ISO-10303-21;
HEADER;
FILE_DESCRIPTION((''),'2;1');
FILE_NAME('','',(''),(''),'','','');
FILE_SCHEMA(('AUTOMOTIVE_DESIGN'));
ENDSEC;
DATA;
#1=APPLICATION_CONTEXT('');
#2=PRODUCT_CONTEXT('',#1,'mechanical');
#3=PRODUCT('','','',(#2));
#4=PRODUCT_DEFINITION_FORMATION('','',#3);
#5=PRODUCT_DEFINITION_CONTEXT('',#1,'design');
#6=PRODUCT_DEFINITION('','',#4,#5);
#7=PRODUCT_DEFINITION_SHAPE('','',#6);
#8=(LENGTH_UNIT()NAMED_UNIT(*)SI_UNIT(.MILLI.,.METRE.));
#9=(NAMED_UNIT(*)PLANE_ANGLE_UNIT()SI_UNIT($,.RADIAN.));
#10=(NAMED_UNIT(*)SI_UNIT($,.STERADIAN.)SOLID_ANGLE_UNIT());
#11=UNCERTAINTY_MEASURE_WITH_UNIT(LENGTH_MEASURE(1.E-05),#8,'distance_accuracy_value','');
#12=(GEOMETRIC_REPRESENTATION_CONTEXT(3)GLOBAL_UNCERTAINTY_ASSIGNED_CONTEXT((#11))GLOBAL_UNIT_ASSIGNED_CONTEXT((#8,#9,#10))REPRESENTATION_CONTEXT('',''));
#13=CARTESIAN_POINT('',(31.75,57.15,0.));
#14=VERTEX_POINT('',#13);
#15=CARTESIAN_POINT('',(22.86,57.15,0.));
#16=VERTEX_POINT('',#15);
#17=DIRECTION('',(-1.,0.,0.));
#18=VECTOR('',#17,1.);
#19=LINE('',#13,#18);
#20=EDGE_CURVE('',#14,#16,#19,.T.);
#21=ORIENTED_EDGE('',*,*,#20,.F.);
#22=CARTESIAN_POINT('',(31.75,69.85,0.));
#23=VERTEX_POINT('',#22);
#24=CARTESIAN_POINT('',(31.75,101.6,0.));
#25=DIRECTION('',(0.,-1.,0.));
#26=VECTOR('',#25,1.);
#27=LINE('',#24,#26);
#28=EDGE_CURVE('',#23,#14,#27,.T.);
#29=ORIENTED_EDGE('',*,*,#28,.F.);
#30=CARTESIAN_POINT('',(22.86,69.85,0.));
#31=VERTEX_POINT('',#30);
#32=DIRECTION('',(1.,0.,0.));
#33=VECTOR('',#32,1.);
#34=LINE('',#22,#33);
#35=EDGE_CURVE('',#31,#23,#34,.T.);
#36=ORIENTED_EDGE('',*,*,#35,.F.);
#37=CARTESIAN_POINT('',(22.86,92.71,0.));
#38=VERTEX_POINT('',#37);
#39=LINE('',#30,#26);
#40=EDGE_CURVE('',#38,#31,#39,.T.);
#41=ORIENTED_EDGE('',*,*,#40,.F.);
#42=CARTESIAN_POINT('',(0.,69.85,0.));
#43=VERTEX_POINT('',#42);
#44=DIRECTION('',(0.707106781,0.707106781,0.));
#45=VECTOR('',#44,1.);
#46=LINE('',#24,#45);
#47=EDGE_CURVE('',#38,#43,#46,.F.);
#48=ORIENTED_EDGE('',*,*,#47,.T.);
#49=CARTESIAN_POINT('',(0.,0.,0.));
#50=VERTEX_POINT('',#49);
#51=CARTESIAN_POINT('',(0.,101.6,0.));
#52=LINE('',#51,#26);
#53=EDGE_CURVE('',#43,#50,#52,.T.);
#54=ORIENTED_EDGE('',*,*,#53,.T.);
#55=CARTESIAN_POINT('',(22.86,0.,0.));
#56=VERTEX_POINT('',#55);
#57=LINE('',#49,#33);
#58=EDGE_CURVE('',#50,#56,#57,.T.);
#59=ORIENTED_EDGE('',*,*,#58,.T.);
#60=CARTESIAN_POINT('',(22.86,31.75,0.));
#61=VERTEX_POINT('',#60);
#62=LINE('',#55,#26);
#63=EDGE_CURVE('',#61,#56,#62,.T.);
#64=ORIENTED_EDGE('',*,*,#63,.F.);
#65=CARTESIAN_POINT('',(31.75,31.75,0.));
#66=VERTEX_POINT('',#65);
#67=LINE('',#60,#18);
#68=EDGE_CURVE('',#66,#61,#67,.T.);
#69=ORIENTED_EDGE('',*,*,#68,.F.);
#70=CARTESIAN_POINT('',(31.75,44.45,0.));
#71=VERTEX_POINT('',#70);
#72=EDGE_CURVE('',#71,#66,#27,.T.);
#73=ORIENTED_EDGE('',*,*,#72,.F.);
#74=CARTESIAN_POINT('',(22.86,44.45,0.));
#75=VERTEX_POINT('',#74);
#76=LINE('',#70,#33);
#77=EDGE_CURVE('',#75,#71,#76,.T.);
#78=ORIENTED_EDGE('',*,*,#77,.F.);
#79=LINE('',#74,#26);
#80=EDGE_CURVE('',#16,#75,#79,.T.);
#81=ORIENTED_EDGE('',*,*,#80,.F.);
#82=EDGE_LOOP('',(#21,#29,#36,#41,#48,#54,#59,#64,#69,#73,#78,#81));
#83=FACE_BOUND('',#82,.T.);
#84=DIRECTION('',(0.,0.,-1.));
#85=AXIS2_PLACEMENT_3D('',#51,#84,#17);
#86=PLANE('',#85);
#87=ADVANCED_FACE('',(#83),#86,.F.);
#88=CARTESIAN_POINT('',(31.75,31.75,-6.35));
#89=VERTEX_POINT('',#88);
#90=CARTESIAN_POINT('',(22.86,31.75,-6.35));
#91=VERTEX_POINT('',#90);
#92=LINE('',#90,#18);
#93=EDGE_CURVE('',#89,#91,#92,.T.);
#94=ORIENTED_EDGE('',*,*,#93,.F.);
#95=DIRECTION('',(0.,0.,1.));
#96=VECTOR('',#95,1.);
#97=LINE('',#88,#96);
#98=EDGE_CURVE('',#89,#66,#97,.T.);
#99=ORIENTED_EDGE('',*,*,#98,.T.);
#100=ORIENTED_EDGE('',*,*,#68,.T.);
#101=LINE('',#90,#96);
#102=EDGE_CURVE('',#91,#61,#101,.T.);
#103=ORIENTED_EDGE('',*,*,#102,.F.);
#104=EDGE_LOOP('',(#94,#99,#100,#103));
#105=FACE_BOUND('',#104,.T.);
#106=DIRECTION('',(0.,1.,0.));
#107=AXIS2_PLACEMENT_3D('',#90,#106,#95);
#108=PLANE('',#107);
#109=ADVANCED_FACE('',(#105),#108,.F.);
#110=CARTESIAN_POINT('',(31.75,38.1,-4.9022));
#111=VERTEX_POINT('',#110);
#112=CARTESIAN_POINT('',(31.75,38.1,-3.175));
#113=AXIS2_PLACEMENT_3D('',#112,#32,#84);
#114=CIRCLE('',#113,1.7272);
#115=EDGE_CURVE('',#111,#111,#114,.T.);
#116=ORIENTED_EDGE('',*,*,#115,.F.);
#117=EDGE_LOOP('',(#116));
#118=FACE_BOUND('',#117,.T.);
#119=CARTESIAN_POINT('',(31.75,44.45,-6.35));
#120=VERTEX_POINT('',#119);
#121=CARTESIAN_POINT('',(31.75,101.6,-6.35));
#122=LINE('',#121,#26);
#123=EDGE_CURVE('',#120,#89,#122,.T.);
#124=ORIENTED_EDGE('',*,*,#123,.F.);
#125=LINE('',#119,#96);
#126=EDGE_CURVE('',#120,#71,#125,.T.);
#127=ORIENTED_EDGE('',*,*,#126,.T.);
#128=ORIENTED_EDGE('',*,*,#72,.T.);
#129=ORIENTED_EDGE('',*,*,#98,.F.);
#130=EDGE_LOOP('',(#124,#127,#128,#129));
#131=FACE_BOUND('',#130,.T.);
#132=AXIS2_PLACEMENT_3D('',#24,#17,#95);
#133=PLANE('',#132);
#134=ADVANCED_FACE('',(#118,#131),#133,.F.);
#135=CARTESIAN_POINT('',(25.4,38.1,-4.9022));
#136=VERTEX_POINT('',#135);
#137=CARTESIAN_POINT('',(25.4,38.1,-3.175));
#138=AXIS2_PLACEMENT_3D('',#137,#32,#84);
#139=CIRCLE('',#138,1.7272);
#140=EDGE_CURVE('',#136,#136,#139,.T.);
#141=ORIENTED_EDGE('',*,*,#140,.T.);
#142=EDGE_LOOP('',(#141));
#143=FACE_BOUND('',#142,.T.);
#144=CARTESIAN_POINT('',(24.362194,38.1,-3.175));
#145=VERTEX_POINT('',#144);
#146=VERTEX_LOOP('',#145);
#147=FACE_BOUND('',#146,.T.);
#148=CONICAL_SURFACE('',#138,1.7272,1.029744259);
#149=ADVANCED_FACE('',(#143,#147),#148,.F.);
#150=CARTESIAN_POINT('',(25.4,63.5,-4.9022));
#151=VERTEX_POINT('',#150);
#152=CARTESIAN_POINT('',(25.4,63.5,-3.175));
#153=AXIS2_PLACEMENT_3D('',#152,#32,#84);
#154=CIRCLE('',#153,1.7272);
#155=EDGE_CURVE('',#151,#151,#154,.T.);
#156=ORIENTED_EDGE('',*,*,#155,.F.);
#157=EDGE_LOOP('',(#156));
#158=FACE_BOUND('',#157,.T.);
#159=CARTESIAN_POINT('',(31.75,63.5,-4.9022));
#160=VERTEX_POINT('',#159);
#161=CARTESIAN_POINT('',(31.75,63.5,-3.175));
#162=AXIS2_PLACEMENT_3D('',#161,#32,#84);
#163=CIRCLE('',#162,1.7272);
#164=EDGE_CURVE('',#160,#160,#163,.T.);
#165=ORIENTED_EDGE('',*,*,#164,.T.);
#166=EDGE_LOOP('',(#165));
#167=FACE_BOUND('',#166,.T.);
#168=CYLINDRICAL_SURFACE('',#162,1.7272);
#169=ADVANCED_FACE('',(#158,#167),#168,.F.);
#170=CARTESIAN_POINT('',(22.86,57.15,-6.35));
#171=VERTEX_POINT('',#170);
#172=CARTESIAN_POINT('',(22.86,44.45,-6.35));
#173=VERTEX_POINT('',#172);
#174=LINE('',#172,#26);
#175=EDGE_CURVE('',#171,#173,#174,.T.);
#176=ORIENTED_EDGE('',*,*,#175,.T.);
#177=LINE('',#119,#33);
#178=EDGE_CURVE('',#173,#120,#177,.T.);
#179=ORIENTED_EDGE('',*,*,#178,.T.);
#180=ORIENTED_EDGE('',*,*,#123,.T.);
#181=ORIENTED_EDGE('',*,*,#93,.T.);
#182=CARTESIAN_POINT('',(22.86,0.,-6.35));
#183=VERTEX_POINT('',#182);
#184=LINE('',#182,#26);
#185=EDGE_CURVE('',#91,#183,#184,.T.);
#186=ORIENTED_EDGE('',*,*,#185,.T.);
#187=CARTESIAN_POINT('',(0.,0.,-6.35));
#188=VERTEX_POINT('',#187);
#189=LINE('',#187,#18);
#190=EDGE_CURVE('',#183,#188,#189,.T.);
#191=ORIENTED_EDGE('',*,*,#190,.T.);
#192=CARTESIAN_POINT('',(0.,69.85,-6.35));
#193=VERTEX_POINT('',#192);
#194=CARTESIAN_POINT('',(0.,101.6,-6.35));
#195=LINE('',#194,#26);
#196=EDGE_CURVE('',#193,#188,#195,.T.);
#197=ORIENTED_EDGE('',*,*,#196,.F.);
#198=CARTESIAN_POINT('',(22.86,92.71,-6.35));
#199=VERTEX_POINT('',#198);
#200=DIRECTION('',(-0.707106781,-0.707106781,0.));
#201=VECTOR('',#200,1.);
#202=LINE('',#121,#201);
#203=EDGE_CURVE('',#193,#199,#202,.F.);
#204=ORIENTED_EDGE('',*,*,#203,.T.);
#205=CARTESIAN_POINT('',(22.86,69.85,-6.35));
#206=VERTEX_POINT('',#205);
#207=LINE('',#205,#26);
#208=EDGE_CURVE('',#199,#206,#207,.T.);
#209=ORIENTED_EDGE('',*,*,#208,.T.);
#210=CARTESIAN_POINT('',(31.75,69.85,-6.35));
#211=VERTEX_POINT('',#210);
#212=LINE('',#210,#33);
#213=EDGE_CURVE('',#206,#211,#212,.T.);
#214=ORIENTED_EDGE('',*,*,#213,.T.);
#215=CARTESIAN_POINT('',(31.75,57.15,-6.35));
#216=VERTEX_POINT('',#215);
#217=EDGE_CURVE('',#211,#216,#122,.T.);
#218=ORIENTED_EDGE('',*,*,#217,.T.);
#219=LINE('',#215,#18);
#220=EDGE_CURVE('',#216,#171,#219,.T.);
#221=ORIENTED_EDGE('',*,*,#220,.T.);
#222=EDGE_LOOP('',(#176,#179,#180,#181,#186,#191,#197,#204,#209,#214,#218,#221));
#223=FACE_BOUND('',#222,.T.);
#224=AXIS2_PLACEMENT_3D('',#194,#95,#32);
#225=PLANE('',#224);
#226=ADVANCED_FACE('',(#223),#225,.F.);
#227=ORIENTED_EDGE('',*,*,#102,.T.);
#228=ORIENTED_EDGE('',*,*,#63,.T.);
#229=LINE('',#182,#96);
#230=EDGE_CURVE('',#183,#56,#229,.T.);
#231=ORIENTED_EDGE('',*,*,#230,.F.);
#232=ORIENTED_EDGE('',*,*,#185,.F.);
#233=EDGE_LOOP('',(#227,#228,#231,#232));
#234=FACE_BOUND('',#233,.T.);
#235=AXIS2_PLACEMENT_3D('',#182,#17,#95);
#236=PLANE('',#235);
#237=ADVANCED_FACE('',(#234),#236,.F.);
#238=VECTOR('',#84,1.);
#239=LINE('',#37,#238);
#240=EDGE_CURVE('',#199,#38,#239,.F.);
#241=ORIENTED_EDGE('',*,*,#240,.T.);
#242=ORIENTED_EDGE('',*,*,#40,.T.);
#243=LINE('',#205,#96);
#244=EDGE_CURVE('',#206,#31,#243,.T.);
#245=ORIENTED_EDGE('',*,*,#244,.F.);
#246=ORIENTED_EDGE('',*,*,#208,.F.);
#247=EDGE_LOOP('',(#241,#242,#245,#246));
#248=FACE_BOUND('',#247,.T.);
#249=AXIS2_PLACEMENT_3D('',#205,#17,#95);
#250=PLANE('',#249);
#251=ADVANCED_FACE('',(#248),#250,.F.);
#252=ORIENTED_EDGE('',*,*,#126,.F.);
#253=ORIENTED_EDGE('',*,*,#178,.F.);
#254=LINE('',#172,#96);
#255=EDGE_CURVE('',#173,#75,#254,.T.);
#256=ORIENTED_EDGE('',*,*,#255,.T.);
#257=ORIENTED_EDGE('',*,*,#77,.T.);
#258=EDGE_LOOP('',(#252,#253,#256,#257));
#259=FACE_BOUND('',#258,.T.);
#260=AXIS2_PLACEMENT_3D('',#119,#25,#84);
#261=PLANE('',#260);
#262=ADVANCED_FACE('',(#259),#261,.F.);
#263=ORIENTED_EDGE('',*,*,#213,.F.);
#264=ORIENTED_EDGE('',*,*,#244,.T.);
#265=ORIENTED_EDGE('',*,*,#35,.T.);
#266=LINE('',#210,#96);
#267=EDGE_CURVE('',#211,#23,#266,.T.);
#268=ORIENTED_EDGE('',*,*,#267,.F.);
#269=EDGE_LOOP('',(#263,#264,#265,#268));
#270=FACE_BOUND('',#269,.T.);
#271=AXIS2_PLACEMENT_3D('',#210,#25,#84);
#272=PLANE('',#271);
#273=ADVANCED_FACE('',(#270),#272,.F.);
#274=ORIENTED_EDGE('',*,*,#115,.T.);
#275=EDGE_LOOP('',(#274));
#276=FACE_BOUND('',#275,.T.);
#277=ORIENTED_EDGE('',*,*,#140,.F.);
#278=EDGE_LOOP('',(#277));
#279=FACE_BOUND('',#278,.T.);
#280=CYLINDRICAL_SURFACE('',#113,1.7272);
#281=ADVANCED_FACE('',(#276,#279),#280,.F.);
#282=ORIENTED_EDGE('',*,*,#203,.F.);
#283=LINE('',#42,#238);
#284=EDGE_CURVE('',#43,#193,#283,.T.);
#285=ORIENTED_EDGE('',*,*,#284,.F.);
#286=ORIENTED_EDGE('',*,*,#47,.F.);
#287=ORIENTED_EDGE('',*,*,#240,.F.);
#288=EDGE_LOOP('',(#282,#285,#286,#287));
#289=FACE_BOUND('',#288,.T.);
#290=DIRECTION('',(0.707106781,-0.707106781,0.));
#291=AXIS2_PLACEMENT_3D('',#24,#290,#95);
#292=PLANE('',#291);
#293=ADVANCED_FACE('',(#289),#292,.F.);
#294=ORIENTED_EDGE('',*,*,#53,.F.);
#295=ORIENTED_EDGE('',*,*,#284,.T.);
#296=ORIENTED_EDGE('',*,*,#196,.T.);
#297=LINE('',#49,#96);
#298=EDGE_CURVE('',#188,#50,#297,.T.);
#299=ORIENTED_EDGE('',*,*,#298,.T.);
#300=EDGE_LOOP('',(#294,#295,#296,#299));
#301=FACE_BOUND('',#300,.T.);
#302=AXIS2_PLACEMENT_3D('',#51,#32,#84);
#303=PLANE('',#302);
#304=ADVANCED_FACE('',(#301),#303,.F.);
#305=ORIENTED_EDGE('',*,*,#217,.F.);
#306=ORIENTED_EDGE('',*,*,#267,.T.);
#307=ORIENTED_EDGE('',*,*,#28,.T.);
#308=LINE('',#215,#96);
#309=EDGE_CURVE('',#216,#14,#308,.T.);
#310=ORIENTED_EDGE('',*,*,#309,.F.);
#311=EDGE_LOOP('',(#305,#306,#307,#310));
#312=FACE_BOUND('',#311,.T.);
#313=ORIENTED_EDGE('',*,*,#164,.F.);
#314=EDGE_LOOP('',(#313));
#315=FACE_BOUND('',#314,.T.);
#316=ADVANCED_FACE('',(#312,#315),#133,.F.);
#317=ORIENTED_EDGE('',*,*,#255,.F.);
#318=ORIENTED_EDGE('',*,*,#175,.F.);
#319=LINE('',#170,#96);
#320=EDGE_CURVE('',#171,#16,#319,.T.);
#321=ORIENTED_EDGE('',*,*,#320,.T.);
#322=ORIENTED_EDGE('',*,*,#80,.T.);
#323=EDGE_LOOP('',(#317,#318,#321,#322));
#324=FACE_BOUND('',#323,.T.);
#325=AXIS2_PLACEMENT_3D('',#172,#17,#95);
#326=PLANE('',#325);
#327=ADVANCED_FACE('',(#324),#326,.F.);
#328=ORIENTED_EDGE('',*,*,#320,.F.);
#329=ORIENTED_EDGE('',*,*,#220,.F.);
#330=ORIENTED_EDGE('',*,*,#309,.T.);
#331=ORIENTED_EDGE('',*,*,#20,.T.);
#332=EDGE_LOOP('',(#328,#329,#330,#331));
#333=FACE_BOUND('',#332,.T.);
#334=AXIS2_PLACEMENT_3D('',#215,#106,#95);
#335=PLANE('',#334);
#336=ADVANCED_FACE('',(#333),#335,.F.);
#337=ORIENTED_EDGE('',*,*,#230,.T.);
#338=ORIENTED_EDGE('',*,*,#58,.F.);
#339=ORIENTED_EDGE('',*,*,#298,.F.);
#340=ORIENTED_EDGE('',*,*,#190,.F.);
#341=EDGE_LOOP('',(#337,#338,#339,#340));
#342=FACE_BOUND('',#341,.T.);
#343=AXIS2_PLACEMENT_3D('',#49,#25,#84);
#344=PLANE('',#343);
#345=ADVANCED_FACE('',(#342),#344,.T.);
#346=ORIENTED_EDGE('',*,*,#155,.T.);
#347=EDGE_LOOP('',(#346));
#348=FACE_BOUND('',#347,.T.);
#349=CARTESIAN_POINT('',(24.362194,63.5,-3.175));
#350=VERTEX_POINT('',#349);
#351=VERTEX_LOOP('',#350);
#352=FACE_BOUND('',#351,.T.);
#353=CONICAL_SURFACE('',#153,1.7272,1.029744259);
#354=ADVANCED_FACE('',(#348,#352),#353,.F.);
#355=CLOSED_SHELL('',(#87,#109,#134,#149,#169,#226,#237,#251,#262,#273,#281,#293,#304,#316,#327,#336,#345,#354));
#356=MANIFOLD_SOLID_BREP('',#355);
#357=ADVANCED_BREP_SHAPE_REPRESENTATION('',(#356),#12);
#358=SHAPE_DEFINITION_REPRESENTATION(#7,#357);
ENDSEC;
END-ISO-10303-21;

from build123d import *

# Parameters (mm, degrees)
SKETCH1_W                 = 31.75
SKETCH1_H                 = 6.35
BOSS_EXTRUDE1_DEPTH       = 101.6
CHAMFER1_SIZE             = 31.75
F_8_32_TAPPED_HOLE1_D     = 3.4544
F_8_32_TAPPED_HOLE1_DEPTH = 6.35
F_8_32_TAPPED_HOLE1_TIP   = 1.037806461
SKETCH4_W                 = 8.89
SKETCH4_H                 = 31.75
SKETCH4_H_2               = 12.7
CUT_EXTRUDE1_DEPTH        = 107.634633211


with BuildPart() as part:
    # Sketch1 → Boss-Extrude1 (new body)
    with BuildSketch(Plane(origin=(0, 0, 0), x_dir=(1, 0, 0), z_dir=(0, 1, 0))):
        with Locations((15.875, 3.175)):
            Rectangle(SKETCH1_W, SKETCH1_H)
    extrude(amount=BOSS_EXTRUDE1_DEPTH)

    # Chamfer1
    chamfer1_edges = [part.edges().sort_by_distance(p)[0] for p in [
        (0, 101.6, -3.175),
    ]]
    chamfer(chamfer1_edges, length=CHAMFER1_SIZE - 0.0001)  # a hair under: the kernel refuses the full size

    # #8-32 Tapped Hole1
    with Locations(Plane(origin=(31.75, 0, 0), x_dir=(0, 0, -1), z_dir=(1, 0, 0))):
        with Locations((3.175, 63.5), (3.175, 38.1)):
            Hole(F_8_32_TAPPED_HOLE1_D / 2, depth=F_8_32_TAPPED_HOLE1_DEPTH)
            with Locations((0, 0, -(F_8_32_TAPPED_HOLE1_DEPTH + F_8_32_TAPPED_HOLE1_TIP / 2))):  # 118° drill point
                Cone(0, F_8_32_TAPPED_HOLE1_D / 2, F_8_32_TAPPED_HOLE1_TIP, mode=Mode.SUBTRACT)

    # Sketch4 → Cut-Extrude1 (cut, through all)
    with BuildSketch(Plane.XY):
        with Locations((27.305, 15.875)):
            Rectangle(SKETCH4_W, SKETCH4_H)
        with Locations((27.305, 50.8)):
            Rectangle(SKETCH4_W, SKETCH4_H_2)
        with Locations((27.305, 85.725)):
            Rectangle(SKETCH4_W, SKETCH4_H)
    extrude(amount=-CUT_EXTRUDE1_DEPTH, mode=Mode.SUBTRACT)


solid = part.part
